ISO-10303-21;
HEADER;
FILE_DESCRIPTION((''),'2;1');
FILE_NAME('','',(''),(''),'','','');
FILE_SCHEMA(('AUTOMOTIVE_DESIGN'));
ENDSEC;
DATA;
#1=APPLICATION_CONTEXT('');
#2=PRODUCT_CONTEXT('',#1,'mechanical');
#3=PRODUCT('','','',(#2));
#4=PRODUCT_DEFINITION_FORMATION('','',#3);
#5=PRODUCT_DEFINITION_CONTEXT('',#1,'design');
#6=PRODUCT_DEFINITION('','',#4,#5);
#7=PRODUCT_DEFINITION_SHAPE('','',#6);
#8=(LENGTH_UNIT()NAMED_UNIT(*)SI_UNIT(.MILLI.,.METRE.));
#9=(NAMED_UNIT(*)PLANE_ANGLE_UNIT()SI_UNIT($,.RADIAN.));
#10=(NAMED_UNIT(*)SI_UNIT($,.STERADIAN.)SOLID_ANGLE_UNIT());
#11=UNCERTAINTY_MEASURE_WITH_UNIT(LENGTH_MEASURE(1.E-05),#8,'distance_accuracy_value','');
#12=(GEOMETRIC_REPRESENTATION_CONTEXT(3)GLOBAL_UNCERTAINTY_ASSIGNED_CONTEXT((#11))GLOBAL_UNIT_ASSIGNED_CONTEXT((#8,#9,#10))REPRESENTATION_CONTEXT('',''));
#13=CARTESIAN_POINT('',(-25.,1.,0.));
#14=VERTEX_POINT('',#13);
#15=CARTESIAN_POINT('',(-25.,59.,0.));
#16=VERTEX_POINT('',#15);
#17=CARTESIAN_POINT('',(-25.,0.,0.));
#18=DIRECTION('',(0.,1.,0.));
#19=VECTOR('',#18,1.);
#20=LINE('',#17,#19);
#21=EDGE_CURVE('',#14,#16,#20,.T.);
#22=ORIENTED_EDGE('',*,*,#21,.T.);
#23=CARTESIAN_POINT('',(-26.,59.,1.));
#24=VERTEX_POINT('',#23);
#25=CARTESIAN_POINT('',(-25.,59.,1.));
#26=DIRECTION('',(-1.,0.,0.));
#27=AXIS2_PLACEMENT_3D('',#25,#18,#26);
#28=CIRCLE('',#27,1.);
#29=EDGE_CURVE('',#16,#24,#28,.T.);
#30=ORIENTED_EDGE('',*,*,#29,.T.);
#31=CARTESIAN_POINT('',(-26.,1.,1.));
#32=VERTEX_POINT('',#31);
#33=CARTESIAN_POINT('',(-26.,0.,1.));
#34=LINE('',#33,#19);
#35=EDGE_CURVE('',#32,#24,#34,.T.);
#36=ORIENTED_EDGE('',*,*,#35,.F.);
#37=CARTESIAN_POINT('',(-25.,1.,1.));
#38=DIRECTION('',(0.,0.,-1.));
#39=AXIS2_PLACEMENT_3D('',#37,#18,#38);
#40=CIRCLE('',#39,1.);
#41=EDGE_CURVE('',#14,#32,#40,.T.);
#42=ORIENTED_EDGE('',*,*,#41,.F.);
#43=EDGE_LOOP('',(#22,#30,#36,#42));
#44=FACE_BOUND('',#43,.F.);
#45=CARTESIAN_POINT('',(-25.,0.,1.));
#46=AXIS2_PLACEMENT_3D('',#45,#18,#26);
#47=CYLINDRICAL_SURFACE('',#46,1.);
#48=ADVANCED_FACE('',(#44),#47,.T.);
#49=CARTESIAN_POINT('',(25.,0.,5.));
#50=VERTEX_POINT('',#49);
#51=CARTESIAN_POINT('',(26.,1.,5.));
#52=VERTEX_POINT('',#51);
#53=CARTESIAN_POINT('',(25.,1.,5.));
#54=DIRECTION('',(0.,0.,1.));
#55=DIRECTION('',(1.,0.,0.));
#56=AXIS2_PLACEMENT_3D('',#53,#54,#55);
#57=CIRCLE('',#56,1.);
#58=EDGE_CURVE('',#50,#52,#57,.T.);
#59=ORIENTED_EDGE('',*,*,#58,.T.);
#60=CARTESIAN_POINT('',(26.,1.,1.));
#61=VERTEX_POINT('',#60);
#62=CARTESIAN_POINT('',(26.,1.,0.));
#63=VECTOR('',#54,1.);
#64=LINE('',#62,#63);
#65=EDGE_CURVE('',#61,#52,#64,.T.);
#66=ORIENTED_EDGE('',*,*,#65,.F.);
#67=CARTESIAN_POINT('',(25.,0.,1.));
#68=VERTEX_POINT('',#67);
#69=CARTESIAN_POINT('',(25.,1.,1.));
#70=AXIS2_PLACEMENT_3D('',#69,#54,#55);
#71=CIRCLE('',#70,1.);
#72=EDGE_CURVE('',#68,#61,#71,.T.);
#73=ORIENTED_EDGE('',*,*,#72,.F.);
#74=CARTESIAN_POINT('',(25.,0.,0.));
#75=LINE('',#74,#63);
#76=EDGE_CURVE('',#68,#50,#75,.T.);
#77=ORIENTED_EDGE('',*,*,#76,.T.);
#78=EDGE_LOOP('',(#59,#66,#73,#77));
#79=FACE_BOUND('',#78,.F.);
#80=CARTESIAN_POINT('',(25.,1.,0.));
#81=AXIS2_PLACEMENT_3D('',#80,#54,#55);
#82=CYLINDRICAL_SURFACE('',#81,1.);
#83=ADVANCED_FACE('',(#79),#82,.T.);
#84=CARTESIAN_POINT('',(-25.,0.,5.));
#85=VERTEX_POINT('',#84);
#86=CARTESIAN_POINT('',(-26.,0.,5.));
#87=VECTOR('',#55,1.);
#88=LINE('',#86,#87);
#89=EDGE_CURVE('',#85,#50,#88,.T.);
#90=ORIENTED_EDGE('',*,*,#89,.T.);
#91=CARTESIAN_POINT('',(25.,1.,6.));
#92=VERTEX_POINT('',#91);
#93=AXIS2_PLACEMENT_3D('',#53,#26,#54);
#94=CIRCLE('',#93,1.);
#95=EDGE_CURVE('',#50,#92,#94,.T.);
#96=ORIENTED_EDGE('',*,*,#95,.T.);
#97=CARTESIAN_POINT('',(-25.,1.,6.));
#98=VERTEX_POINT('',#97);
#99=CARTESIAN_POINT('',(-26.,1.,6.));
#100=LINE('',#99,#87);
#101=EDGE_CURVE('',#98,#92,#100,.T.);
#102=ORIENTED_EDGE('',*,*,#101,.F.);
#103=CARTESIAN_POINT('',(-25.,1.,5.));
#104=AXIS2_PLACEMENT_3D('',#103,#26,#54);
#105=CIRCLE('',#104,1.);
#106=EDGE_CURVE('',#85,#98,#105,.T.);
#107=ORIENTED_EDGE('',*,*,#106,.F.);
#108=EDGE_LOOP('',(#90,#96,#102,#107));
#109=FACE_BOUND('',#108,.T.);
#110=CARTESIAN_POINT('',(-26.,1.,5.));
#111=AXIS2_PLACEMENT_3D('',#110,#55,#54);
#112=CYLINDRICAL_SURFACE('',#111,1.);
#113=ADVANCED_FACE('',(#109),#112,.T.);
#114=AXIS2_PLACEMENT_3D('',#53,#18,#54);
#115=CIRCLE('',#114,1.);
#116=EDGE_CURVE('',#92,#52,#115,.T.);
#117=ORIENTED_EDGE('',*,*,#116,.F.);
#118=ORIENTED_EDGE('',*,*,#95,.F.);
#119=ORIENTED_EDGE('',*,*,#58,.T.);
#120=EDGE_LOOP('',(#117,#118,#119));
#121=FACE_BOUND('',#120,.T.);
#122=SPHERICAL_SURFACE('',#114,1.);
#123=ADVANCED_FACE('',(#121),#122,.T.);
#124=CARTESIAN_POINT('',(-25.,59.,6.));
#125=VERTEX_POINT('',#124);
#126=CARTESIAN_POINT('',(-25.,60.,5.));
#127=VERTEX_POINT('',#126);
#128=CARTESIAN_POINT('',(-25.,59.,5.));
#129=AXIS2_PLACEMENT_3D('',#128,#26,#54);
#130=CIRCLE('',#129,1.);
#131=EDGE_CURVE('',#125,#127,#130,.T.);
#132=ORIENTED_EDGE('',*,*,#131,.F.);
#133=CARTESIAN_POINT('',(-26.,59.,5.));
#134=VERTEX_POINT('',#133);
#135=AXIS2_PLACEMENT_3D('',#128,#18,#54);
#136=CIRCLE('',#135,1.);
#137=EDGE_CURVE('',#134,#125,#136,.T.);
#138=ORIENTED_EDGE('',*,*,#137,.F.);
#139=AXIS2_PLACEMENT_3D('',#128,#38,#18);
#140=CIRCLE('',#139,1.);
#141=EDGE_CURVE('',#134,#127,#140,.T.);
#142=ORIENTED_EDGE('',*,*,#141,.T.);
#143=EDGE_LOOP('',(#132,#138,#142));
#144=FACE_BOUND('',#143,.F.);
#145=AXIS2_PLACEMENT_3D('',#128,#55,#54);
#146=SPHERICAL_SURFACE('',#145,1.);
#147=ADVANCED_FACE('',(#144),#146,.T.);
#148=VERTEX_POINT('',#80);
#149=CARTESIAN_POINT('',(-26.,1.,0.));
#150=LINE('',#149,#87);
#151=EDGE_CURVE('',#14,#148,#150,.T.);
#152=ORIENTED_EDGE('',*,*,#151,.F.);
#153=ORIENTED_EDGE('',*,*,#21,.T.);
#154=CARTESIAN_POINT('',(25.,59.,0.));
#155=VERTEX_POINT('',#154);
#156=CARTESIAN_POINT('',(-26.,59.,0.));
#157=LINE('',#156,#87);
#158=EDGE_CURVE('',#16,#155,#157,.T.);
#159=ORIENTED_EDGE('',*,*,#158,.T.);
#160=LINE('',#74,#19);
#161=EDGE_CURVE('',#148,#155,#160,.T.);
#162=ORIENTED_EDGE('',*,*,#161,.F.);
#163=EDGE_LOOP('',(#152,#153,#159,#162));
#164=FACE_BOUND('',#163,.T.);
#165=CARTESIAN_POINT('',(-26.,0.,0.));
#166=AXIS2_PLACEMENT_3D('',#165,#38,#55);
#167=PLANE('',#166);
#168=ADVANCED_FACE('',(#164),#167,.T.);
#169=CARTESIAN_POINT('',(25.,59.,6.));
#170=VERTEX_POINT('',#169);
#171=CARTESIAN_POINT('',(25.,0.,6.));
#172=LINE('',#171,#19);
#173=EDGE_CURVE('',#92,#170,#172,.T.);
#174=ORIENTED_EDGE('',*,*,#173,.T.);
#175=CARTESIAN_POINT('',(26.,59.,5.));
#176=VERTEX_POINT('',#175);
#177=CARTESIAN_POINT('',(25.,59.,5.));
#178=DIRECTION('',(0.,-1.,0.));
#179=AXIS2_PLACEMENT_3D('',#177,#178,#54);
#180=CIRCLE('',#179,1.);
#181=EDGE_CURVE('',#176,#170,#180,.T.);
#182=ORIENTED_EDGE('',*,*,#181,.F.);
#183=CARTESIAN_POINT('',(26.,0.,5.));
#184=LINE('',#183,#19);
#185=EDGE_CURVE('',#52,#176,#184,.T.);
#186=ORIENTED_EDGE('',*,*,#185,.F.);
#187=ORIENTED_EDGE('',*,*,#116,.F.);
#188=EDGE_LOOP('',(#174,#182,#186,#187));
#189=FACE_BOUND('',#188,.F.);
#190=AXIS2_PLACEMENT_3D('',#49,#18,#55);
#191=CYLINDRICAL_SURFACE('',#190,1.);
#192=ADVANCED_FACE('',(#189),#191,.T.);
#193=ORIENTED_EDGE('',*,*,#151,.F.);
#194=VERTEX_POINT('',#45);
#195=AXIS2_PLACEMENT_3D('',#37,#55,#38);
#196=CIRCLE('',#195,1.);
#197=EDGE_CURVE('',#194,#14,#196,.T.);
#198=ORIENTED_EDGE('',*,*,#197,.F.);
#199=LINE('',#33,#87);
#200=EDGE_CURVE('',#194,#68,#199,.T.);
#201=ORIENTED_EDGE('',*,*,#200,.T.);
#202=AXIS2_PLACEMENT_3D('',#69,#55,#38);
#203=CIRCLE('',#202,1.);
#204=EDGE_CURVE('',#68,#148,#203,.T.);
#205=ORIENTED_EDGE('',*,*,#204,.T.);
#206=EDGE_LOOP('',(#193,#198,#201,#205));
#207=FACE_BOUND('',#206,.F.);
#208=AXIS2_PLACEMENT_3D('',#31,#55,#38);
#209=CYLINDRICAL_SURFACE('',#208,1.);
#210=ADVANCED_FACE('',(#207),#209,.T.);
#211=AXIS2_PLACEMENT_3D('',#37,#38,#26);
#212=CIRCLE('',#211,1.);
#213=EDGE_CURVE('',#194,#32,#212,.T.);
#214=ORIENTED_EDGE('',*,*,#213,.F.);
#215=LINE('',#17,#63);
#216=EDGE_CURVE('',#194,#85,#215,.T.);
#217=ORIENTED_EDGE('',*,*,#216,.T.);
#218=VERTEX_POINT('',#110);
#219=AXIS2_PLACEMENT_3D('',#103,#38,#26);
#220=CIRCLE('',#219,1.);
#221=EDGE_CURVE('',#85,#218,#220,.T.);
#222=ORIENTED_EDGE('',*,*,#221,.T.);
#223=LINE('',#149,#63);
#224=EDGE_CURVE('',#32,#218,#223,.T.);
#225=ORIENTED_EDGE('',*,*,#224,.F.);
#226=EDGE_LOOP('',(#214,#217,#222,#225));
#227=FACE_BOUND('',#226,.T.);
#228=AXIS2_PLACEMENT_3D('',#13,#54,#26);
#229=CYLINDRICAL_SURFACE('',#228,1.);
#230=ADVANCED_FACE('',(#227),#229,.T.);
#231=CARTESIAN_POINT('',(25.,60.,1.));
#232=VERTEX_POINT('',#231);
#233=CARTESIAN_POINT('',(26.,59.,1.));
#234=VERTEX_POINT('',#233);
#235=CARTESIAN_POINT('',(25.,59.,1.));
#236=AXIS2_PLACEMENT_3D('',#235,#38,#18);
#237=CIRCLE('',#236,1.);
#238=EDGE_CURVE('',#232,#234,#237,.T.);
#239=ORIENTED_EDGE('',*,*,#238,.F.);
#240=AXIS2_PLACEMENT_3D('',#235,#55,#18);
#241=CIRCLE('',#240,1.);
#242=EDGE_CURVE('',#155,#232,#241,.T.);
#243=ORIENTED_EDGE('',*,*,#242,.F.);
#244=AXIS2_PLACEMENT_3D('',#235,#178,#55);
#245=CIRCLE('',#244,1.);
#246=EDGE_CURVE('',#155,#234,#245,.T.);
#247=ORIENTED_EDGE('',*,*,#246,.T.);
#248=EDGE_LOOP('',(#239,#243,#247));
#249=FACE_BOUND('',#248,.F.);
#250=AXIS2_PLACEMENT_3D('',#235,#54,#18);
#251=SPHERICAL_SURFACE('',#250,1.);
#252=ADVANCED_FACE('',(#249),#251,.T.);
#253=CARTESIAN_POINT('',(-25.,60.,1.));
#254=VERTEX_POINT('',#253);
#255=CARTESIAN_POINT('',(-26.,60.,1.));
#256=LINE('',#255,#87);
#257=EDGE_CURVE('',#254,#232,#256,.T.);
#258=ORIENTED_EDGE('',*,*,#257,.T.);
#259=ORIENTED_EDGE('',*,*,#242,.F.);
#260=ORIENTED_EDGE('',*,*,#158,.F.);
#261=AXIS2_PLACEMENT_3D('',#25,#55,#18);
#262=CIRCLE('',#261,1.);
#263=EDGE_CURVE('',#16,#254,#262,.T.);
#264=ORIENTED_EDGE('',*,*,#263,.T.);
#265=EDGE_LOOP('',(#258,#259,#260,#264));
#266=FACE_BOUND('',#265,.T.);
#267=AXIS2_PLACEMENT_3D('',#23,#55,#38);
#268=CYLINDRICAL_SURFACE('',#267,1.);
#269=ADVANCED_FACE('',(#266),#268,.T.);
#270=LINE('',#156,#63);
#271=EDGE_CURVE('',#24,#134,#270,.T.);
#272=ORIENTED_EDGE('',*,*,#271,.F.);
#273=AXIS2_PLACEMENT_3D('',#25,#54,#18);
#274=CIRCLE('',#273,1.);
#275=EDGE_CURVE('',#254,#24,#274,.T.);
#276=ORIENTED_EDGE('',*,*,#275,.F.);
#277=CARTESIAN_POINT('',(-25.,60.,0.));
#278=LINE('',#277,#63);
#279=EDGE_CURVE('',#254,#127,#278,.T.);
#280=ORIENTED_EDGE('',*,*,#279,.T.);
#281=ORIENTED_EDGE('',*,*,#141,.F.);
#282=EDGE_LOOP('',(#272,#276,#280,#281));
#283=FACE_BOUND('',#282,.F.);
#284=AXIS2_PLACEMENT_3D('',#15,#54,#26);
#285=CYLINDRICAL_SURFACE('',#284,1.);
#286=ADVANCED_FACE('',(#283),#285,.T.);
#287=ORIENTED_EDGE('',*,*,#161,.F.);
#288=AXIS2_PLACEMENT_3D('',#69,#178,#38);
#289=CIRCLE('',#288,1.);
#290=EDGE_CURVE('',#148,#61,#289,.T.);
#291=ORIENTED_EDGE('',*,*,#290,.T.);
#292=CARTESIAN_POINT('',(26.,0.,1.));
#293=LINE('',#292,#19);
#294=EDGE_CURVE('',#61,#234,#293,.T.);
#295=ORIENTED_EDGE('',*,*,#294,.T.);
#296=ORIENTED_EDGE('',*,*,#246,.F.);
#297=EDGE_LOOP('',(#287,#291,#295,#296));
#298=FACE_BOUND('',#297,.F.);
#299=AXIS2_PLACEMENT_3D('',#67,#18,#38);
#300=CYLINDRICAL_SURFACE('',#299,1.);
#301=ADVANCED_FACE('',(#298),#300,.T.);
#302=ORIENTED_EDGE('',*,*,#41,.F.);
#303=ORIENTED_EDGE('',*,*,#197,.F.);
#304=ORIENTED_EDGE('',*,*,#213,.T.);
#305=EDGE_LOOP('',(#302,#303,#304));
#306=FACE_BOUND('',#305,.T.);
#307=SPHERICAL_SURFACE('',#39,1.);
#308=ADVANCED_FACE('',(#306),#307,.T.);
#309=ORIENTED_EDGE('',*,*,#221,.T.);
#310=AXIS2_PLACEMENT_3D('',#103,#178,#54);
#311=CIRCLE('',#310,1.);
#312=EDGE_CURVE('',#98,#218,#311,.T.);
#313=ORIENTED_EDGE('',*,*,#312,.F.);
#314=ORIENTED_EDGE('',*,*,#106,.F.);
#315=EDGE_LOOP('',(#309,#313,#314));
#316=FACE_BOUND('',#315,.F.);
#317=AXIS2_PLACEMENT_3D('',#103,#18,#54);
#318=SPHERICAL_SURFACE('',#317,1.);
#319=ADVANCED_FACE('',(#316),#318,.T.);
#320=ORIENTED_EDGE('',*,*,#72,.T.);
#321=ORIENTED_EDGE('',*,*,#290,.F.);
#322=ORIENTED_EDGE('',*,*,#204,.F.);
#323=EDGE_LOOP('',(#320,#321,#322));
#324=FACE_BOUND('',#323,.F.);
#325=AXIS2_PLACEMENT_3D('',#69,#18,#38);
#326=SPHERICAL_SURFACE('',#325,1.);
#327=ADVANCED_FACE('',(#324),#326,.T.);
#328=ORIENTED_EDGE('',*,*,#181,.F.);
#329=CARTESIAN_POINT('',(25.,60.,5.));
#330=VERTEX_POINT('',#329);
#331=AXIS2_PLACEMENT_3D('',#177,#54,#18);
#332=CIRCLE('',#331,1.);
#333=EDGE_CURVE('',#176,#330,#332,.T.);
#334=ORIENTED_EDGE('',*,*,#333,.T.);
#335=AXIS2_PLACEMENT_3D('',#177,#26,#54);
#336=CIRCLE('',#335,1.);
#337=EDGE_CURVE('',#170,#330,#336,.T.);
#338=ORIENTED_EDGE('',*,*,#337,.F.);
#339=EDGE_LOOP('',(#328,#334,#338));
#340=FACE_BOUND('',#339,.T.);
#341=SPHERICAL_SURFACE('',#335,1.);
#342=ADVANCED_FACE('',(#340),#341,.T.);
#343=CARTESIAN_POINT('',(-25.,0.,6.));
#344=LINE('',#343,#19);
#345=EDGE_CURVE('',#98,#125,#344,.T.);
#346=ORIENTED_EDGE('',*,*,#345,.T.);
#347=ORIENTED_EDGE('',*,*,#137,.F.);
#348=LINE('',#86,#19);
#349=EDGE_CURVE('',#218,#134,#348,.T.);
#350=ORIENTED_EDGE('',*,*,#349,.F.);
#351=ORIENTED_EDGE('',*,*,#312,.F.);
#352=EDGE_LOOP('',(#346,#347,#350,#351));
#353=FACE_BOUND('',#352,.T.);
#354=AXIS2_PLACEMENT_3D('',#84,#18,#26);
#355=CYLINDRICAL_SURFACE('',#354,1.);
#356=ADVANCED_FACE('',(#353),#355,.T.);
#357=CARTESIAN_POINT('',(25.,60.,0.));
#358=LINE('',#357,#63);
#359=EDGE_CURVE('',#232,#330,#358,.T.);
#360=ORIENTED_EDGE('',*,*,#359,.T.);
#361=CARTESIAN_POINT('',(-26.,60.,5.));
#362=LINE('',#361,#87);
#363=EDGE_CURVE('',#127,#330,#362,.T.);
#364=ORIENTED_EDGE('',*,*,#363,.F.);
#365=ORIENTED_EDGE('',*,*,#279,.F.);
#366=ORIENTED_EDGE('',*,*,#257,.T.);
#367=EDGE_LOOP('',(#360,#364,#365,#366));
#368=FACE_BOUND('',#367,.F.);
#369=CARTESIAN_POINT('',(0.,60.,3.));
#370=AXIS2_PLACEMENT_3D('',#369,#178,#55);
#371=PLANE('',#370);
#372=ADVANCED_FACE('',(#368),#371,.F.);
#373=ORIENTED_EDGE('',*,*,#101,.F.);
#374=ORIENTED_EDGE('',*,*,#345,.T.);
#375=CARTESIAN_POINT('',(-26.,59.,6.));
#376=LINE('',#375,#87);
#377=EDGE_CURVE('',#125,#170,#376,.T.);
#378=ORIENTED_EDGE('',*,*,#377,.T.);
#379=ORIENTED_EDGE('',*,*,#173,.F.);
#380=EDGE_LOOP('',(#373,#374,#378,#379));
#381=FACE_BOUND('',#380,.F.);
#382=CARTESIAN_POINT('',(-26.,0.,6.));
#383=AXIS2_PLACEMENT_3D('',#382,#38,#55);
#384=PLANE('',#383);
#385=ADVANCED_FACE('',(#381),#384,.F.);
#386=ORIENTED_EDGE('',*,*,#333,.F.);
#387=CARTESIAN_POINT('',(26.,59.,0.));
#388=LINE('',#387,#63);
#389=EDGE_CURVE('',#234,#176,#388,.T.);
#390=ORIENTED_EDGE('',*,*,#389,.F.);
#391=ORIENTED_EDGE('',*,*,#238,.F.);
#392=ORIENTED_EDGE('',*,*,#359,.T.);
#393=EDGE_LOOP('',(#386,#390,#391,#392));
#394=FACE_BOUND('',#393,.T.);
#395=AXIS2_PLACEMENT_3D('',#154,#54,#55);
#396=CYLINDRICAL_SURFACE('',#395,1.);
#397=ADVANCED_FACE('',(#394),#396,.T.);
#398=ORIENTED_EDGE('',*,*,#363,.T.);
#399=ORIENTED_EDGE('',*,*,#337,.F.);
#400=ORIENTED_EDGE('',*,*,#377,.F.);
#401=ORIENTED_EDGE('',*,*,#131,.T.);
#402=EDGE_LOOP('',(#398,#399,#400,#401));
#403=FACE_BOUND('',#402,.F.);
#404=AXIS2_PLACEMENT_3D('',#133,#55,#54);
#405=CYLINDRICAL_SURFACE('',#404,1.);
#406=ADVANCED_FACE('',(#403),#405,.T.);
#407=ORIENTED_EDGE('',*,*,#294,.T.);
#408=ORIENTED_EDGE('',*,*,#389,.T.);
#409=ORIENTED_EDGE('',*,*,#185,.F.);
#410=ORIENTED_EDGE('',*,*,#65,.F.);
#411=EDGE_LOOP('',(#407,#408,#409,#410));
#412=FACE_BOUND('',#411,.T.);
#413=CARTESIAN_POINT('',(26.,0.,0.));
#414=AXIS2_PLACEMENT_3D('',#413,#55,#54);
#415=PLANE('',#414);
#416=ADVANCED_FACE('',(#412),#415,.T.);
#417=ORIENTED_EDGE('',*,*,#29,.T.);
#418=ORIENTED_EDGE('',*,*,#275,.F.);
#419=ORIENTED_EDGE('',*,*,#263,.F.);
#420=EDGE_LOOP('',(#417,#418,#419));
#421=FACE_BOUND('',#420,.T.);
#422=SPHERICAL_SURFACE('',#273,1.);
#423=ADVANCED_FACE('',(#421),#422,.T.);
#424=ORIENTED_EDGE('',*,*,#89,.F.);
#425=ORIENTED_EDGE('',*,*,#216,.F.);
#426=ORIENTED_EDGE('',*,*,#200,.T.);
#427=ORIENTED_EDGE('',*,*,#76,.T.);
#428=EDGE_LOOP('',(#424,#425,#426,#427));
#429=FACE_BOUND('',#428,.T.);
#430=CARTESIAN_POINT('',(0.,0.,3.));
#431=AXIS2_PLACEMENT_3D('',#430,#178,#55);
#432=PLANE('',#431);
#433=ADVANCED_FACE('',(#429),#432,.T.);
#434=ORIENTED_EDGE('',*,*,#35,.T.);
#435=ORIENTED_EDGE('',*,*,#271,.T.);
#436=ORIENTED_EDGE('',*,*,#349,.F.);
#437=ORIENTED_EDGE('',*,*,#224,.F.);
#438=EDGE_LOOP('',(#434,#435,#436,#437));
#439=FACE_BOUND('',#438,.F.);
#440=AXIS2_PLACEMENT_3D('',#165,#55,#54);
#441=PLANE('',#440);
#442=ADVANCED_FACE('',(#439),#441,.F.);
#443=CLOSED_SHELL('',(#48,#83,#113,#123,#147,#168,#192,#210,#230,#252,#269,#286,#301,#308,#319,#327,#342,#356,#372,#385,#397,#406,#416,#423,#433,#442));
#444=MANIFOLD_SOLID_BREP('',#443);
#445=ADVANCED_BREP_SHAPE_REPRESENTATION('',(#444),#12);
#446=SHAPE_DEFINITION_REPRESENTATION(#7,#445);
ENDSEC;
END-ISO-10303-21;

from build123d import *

# Parameters (mm, degrees)
F0_W     = 52
F0_H     = 6
F1_DEPTH = 60
F2_R     = 1


# Not quite as in the source:
# - a feature names something its author has since deleted; it is built from what else it names


with BuildPart() as f1:
    # F0 (on Front) → F1 (new body)
    with BuildSketch(Plane.XZ):
        with Locations((0, 3)):
            Rectangle(F0_W, F0_H)
    extrude(amount=-F1_DEPTH)

    # F2
    f2_edges = [f1.edges().sort_by_distance(p)[0] for p in [
        (0, 60, 6),
        (26, 30, 6),
        (-26, 30, 6),
        (0, 0, 6),
        (26, 60, 3),
        (-26, 60, 3),
        (0, 60, 0),
        (-26, 30, 0),
        (26, 30, 0),
        (0, 0, 0),
        (-26, 0, 3),
        (26, 0, 3),
    ]]
    fillet(f2_edges, radius=F2_R)


solid = f1.part
